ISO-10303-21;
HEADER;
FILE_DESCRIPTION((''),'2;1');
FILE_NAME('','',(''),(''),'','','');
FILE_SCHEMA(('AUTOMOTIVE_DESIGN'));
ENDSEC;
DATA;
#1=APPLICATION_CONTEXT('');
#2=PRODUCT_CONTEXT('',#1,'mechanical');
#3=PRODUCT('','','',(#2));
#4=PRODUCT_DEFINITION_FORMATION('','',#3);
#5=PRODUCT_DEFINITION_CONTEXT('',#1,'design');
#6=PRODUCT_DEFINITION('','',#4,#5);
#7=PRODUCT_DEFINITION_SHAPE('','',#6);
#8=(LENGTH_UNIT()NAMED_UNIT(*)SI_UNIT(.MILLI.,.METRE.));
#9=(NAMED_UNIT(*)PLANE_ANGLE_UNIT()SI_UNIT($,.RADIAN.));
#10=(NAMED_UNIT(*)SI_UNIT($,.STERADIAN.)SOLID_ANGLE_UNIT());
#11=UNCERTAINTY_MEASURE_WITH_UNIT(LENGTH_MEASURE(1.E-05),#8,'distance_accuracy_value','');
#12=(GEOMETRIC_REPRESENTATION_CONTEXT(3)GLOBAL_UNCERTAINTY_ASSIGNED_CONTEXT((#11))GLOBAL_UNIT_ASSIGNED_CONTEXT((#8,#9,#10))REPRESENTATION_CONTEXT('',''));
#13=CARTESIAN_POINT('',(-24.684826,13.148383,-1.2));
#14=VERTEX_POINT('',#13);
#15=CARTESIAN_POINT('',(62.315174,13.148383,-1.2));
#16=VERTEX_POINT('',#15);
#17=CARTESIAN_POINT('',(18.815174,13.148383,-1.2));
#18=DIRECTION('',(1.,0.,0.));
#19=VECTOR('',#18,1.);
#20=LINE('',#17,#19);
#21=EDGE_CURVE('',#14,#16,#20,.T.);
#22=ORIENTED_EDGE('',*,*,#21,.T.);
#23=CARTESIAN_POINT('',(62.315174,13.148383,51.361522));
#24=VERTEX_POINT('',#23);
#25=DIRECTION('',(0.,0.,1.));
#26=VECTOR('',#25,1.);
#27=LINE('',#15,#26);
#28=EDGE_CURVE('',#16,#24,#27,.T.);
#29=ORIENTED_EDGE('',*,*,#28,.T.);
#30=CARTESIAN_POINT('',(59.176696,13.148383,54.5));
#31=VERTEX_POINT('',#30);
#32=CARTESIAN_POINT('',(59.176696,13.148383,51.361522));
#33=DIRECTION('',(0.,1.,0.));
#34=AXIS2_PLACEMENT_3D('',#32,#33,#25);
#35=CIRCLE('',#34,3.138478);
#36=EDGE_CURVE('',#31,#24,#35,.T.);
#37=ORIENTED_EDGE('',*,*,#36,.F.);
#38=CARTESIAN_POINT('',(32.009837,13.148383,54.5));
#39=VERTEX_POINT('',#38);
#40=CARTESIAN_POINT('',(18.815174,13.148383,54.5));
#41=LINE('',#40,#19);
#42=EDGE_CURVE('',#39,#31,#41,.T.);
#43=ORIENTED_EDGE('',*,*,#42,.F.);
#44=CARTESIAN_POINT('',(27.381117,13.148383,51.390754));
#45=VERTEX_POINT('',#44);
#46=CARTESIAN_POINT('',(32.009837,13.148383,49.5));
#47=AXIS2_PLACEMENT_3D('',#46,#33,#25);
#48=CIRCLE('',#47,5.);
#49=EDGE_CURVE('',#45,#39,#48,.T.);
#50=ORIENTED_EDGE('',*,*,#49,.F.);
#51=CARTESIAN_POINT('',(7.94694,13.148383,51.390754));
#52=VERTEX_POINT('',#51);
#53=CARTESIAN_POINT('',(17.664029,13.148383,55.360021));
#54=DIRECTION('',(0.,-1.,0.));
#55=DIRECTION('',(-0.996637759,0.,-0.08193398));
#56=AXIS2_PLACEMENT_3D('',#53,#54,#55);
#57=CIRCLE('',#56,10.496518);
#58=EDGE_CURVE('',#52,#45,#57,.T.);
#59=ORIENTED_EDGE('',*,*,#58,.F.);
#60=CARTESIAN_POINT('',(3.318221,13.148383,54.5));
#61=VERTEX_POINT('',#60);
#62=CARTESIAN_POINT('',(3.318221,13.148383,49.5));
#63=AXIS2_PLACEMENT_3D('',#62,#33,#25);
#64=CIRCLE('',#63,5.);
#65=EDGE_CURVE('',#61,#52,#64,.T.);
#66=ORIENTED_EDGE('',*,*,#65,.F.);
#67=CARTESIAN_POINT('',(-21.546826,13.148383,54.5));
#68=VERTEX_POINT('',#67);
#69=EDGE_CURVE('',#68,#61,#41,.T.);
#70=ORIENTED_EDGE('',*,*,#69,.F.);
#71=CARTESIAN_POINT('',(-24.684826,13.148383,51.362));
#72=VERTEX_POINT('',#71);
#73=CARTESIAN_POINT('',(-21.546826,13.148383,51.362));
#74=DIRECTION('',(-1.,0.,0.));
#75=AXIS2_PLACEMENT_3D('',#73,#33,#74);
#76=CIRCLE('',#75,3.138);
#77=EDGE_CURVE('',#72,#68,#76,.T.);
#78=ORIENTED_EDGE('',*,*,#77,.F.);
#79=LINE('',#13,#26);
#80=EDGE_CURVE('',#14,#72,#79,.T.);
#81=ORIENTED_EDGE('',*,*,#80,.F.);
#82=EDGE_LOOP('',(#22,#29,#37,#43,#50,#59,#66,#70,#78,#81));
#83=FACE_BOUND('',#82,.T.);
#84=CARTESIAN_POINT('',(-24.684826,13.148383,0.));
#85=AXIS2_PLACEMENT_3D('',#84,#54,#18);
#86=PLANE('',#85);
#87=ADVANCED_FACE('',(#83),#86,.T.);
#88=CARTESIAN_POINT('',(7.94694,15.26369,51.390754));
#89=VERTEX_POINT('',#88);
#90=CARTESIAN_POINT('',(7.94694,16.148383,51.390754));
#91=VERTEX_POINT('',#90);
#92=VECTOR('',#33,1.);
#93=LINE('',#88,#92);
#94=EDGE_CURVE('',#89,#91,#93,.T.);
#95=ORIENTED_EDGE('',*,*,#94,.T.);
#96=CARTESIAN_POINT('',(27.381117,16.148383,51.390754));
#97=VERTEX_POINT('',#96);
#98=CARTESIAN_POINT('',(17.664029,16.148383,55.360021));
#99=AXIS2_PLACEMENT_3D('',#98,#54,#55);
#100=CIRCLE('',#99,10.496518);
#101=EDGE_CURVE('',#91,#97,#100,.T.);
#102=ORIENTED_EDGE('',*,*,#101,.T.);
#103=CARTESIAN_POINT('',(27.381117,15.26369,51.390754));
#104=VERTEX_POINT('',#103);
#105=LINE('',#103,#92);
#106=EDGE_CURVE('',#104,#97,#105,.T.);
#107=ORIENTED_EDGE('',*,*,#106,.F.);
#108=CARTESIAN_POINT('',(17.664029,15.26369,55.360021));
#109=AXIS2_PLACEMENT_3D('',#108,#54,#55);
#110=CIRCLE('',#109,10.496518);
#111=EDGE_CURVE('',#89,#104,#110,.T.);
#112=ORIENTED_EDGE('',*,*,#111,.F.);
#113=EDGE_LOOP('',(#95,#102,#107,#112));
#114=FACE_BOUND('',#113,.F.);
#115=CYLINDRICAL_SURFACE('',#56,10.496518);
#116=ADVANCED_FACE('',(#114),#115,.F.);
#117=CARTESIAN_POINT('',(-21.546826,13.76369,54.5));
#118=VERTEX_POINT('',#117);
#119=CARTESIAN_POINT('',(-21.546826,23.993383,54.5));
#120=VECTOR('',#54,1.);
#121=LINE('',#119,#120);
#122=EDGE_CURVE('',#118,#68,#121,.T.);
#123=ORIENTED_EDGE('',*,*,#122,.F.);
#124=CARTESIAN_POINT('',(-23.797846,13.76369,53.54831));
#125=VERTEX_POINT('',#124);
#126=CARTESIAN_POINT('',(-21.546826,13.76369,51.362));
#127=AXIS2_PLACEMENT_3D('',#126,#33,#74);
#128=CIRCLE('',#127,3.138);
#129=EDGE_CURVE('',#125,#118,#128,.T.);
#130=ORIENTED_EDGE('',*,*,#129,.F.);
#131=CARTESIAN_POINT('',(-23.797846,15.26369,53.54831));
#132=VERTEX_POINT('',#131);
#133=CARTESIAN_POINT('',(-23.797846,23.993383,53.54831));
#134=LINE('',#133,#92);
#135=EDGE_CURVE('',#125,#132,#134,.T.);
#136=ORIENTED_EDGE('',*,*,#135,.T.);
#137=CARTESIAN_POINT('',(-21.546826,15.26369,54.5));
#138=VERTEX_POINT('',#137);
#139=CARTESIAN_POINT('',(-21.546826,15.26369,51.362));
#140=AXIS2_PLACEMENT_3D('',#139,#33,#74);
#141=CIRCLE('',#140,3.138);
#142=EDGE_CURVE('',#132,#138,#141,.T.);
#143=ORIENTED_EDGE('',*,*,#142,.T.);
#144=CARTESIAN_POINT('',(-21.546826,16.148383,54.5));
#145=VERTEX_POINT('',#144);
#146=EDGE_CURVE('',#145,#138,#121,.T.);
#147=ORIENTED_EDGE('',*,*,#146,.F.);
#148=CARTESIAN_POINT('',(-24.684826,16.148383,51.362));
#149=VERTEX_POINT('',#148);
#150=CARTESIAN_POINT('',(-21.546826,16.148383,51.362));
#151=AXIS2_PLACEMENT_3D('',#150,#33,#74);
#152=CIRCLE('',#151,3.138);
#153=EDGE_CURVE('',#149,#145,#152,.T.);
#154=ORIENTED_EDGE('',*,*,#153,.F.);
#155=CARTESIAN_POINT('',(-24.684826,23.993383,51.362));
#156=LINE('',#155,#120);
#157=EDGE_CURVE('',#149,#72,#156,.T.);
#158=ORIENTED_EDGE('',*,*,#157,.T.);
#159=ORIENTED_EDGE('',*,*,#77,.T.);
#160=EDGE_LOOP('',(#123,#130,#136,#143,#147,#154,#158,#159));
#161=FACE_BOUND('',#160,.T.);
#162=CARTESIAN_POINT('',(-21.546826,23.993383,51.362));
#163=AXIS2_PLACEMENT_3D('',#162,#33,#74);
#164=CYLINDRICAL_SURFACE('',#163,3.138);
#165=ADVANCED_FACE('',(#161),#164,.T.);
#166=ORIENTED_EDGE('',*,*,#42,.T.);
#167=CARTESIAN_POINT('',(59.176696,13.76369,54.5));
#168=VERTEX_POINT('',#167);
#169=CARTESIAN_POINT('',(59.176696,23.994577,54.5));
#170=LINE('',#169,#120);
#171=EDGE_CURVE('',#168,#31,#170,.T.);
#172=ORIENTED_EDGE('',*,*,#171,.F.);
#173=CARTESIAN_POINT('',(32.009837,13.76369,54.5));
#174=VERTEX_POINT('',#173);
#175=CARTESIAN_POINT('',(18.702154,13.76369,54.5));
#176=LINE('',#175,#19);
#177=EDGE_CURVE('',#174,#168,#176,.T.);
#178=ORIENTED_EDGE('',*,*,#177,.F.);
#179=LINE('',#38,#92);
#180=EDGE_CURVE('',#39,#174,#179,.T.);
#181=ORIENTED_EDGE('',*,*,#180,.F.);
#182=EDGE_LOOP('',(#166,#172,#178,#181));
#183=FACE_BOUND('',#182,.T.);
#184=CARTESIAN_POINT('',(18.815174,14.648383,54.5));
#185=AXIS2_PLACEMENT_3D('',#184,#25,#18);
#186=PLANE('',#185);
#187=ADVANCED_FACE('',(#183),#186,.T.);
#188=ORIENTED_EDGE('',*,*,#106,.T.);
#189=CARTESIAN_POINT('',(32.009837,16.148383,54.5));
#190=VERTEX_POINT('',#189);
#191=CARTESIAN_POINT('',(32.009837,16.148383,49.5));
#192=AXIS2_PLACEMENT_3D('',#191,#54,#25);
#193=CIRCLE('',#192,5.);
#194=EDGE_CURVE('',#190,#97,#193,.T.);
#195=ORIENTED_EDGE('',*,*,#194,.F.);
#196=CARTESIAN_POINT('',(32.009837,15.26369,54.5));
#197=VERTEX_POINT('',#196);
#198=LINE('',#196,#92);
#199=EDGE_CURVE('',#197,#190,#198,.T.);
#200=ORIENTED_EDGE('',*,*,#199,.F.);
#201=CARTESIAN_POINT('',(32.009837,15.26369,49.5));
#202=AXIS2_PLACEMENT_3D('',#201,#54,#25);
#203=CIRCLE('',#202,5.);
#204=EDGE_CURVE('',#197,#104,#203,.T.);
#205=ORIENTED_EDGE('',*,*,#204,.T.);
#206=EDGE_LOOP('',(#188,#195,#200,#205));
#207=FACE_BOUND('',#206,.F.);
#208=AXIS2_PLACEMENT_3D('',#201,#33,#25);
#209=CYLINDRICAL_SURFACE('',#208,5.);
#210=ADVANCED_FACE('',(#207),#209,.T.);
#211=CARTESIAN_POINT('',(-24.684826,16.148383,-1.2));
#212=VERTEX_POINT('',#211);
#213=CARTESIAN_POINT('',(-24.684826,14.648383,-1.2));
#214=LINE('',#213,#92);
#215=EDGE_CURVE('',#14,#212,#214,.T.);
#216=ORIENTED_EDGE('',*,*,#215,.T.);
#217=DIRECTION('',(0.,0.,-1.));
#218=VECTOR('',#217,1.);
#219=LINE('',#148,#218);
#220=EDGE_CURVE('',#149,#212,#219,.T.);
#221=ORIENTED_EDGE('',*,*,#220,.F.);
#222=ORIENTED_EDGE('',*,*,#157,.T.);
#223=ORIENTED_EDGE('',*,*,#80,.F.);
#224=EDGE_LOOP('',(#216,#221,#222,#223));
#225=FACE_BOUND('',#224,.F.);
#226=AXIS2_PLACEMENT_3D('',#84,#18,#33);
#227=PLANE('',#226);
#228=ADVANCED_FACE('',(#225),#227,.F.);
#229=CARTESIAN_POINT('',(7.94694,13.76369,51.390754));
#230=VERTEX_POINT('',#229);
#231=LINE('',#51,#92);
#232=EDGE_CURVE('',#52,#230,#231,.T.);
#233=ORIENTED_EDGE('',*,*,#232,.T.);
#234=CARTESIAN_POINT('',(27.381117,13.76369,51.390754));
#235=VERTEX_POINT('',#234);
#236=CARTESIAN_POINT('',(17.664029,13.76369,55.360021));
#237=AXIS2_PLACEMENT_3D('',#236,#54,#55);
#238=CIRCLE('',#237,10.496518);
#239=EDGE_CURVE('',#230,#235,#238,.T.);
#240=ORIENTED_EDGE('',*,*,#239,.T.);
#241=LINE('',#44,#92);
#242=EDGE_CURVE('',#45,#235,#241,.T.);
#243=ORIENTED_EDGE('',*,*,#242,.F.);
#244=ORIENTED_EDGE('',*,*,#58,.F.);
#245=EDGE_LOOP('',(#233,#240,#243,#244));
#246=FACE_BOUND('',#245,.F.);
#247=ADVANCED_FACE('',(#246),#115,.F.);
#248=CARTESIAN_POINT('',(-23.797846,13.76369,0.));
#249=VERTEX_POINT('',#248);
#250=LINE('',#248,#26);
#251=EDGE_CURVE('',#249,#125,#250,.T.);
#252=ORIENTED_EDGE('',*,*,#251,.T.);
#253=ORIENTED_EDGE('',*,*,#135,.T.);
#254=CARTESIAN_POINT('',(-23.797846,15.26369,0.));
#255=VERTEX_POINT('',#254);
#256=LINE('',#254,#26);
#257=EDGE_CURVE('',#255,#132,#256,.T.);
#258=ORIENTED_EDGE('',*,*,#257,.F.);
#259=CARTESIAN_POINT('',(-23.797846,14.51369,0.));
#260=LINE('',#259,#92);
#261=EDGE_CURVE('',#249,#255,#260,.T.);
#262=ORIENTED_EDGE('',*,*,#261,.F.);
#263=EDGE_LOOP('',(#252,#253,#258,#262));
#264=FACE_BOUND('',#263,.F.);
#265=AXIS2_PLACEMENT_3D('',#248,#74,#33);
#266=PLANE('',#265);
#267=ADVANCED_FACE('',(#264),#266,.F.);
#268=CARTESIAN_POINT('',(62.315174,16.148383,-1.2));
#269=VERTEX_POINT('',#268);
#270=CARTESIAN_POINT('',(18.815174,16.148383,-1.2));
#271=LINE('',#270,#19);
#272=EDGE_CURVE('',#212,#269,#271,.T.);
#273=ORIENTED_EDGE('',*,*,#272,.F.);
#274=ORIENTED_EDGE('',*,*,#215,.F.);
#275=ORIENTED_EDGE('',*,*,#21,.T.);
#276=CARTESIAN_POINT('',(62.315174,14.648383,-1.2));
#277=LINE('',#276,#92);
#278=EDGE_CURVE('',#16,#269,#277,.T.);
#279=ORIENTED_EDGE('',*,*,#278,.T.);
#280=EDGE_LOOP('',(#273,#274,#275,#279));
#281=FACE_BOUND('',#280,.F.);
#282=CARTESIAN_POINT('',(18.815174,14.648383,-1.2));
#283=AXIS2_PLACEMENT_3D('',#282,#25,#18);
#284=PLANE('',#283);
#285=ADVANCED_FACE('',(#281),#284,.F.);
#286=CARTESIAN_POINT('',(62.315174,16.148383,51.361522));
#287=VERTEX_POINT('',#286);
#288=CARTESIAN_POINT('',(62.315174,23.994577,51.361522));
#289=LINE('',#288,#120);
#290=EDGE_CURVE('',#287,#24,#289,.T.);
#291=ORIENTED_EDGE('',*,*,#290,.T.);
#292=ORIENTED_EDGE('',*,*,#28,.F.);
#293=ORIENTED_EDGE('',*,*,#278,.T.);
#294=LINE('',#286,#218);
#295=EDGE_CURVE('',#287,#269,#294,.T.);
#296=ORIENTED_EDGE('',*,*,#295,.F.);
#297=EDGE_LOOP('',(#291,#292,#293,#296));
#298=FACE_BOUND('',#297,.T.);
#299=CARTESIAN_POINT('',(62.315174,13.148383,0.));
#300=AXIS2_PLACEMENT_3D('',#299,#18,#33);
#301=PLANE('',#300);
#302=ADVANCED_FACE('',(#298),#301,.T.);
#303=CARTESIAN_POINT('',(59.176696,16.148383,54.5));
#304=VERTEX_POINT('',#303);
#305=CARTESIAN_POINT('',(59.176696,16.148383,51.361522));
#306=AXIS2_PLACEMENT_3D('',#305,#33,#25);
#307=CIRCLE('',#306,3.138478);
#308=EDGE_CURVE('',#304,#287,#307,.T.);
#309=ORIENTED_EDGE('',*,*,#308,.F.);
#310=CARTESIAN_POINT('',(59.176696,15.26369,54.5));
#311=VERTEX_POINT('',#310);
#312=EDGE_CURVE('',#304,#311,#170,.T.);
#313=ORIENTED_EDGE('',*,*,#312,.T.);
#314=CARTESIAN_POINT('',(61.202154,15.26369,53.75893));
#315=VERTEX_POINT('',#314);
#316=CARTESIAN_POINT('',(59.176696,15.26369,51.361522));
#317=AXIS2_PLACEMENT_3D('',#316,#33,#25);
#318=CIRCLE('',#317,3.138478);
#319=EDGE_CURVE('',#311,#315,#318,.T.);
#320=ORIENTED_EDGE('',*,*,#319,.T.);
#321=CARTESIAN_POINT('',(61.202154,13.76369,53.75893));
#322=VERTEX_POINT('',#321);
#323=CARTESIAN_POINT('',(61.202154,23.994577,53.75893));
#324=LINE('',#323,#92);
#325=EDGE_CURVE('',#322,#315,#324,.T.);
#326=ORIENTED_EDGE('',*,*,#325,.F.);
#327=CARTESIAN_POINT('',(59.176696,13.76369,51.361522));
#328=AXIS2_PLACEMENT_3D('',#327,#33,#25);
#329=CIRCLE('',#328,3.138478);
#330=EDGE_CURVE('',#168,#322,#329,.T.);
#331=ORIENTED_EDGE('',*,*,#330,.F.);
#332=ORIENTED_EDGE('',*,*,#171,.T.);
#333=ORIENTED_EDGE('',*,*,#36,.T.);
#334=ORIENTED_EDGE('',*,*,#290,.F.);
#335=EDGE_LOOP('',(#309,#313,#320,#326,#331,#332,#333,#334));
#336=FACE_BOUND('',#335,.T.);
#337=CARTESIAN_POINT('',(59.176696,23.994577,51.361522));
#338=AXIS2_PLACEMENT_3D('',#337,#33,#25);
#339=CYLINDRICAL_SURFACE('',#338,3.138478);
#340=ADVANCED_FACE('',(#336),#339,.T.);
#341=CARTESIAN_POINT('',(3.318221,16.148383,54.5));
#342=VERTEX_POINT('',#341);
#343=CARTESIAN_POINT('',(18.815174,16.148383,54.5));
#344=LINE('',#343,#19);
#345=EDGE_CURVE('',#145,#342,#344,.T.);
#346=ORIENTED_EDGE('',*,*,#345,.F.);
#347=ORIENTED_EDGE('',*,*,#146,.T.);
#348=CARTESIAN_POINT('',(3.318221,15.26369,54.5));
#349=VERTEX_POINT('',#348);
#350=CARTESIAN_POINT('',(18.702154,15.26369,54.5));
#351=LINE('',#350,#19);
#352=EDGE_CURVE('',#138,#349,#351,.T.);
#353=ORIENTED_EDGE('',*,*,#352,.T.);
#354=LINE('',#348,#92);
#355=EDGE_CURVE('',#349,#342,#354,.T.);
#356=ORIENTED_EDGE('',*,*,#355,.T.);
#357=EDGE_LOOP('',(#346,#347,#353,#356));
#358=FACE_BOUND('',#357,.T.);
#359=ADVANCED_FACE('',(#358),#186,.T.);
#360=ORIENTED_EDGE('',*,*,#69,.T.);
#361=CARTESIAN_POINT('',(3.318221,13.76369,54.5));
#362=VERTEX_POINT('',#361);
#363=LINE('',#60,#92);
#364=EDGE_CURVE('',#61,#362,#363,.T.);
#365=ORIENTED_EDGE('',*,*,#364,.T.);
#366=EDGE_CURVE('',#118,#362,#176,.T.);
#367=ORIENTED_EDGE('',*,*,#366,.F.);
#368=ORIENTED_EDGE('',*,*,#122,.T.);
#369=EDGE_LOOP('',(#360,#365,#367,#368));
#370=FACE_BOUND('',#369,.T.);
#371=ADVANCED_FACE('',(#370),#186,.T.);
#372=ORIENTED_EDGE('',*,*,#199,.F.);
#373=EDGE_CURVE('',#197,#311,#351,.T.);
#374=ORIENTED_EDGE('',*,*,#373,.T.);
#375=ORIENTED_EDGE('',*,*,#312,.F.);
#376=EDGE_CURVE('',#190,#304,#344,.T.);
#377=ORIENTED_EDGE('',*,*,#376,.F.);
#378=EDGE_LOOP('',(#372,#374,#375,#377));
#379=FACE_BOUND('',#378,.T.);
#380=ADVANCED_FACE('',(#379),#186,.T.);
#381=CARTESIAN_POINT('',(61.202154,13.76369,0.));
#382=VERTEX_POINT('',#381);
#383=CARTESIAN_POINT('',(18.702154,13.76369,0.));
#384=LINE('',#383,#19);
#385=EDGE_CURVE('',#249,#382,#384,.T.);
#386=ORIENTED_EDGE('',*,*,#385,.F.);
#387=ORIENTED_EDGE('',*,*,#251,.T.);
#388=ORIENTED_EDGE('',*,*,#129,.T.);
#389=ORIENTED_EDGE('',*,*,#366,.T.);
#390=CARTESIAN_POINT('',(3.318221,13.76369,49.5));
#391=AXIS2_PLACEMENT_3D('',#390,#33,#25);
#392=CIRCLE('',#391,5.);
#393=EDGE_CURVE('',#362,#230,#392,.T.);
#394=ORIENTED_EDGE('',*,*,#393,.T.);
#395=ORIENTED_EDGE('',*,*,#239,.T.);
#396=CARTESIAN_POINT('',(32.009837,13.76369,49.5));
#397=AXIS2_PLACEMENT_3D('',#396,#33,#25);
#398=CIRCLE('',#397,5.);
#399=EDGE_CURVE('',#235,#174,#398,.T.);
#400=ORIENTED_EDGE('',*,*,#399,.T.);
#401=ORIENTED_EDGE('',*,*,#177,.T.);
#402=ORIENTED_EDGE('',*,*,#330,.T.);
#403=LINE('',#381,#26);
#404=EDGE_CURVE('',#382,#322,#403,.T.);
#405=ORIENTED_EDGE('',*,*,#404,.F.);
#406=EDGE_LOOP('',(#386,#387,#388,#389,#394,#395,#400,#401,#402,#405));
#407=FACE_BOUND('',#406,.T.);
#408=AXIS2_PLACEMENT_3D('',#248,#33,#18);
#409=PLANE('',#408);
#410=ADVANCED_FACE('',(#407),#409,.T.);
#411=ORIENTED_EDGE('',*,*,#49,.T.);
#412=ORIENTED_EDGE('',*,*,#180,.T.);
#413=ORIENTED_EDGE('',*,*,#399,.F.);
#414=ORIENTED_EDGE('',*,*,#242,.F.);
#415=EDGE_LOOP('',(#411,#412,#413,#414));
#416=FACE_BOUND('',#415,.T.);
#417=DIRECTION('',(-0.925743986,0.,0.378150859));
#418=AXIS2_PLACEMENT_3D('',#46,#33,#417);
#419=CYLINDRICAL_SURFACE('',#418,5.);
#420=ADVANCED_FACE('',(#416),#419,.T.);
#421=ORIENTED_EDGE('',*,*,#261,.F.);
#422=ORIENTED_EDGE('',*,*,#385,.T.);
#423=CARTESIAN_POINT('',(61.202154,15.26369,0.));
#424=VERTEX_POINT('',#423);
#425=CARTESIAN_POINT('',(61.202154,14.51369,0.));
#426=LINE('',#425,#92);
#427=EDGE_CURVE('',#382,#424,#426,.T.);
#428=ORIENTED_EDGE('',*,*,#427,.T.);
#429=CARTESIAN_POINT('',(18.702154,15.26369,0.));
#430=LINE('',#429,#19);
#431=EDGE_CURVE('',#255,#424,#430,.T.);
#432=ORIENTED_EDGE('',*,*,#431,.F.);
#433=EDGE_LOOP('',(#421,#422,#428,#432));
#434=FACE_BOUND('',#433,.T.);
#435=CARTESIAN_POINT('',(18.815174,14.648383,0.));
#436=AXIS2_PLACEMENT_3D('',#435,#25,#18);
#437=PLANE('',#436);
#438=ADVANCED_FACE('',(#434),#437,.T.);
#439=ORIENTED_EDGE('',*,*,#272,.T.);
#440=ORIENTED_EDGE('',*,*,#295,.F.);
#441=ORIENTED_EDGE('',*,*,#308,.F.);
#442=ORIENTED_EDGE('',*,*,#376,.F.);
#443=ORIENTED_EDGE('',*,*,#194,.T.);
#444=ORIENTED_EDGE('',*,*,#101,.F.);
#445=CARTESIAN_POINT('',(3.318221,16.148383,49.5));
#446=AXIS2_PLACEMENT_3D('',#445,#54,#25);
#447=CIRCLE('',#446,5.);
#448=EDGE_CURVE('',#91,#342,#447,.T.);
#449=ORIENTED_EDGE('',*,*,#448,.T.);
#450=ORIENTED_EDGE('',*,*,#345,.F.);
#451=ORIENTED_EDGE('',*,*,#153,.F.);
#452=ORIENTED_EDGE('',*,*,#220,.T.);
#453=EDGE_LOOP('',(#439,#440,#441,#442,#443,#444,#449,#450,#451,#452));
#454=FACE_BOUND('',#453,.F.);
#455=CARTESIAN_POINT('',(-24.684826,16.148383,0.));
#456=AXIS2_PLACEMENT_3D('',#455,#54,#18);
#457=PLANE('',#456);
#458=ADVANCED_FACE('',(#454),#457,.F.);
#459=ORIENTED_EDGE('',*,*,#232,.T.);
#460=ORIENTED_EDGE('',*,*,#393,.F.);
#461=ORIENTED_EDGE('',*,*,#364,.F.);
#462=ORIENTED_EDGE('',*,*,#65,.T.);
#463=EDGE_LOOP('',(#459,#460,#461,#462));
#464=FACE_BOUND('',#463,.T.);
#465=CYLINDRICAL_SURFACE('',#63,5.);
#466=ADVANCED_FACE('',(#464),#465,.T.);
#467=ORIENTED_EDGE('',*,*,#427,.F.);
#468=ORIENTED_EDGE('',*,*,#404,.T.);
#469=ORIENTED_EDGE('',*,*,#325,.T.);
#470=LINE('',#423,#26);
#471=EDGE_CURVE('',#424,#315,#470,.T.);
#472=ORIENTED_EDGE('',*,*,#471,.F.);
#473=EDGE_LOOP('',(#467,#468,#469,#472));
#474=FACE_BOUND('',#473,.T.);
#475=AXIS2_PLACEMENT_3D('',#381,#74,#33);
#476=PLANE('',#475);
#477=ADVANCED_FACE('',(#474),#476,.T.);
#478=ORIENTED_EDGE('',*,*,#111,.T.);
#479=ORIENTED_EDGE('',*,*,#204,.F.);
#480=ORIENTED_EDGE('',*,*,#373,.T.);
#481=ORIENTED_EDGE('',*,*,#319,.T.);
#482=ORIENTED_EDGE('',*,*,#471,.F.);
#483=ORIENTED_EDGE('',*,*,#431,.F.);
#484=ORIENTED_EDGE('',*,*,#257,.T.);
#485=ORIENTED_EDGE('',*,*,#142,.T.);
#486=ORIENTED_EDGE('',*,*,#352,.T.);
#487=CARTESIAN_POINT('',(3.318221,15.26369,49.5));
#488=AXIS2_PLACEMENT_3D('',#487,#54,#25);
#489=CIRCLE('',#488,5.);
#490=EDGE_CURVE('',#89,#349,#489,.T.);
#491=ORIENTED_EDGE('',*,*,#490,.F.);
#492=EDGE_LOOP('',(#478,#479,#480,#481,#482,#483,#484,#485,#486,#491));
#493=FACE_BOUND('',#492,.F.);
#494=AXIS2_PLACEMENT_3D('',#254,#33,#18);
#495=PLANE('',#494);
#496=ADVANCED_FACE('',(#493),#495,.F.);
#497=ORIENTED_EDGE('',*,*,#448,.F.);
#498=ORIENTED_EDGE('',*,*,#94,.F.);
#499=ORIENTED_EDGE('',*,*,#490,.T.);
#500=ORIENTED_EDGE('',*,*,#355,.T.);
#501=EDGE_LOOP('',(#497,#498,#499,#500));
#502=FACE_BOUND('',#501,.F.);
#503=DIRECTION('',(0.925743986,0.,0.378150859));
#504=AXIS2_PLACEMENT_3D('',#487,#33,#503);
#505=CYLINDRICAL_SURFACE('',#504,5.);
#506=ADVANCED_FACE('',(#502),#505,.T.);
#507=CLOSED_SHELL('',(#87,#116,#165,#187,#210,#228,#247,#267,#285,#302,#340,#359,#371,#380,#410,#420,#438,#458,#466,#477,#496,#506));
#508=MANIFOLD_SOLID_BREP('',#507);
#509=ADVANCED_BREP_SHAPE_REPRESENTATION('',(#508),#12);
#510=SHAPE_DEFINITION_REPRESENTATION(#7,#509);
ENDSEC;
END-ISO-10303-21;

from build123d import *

# Parameters (mm, degrees)
F0_W        = 87
F0_H        = 3
F0_W_2      = 85
F0_H_2      = 1.5
F1_DEPTH    = 54.5
F3_DEPTH    = 10
F4_T1_DEPTH = 18.6923881554
F5_T1_DEPTH = 18.69
F6_W        = 87
F6_H        = 3
F7_DEPTH    = 1.2
F8_R        = 5


# Not quite as in the source:
# - a fillet or chamfer that OpenCascade refuses, or shapes differently, is made with other operations: its cross-section is extruded or revolved along the edge and cut away or added


with BuildPart() as f1:
    # F0 (on Top) → F1 (new body)
    with BuildSketch(Plane.XY):
        with Locations((18.8151740879, 14.6483827978)):
            Rectangle(F0_W, F0_H)
        with Locations((18.7021535635, 14.5136903673)):
            Rectangle(F0_W_2, F0_H_2, mode=Mode.SUBTRACT)
    extrude(amount=F1_DEPTH)

    # F2 (on face) → F3 (cut)
    with BuildSketch(Plane.XZ.offset(-13.1483827978)):
        with BuildLine():
            Line((28.1252544373, 54.5), (7.2028026916, 54.5))
            ThreePointArc((7.2028026916, 54.5), (17.6640285645, 44.8635037778), (28.1252544373, 54.5))
        make_face()
    extrude(amount=-F3_DEPTH, mode=Mode.SUBTRACT)

    # F4: fillet of radius 3.1384776311 on 1 edges, made by hand

    # F4_s2 → F4_t1 (cut)
    with BuildSketch(Plane.XZ.offset(-23.9945768755)):
        with BuildLine():
            ThreePointArc((59.1766964568, 54.5), (61.3959352723, 53.5807611845), (62.3151740879, 51.3615223689))
            Line((62.3151740879, 51.3615223689), (62.3151740879, 54.5))
            Line((62.3151740879, 54.5), (59.1766964568, 54.5))
        make_face()
    extrude(amount=F4_T1_DEPTH, mode=Mode.SUBTRACT)

    # F5: fillet of radius 3.138 on 1 edges, made by hand

    # F5_s2 → F5_t1 (cut)
    with BuildSketch(Plane.XZ.offset(-23.9933827978)):
        with BuildLine():
            ThreePointArc((-24.6848259121, 51.362), (-23.7657269915, 53.5809010794), (-21.5468259121, 54.5))
            Line((-21.5468259121, 54.5), (-24.6848259121, 54.5))
            Line((-24.6848259121, 54.5), (-24.6848259121, 51.362))
        make_face()
    extrude(amount=F5_T1_DEPTH, mode=Mode.SUBTRACT)

    # F6 (on Top) → F7 (join)
    with BuildSketch(Plane.XY):
        with Locations((18.8151740879, 14.6483827978)):
            Rectangle(F6_W, F6_H)
    extrude(amount=-F7_DEPTH)

    # F8
    f8_edges = [f1.edges().sort_by_distance(p)[0] for p in [
        (28.125254, 13.456037, 54.5),
        (28.125254, 15.706037, 54.5),
        (7.202803, 13.456037, 54.5),
        (7.202803, 15.706037, 54.5),
    ]]
    fillet(f8_edges, radius=F8_R)


solid = f1.part
